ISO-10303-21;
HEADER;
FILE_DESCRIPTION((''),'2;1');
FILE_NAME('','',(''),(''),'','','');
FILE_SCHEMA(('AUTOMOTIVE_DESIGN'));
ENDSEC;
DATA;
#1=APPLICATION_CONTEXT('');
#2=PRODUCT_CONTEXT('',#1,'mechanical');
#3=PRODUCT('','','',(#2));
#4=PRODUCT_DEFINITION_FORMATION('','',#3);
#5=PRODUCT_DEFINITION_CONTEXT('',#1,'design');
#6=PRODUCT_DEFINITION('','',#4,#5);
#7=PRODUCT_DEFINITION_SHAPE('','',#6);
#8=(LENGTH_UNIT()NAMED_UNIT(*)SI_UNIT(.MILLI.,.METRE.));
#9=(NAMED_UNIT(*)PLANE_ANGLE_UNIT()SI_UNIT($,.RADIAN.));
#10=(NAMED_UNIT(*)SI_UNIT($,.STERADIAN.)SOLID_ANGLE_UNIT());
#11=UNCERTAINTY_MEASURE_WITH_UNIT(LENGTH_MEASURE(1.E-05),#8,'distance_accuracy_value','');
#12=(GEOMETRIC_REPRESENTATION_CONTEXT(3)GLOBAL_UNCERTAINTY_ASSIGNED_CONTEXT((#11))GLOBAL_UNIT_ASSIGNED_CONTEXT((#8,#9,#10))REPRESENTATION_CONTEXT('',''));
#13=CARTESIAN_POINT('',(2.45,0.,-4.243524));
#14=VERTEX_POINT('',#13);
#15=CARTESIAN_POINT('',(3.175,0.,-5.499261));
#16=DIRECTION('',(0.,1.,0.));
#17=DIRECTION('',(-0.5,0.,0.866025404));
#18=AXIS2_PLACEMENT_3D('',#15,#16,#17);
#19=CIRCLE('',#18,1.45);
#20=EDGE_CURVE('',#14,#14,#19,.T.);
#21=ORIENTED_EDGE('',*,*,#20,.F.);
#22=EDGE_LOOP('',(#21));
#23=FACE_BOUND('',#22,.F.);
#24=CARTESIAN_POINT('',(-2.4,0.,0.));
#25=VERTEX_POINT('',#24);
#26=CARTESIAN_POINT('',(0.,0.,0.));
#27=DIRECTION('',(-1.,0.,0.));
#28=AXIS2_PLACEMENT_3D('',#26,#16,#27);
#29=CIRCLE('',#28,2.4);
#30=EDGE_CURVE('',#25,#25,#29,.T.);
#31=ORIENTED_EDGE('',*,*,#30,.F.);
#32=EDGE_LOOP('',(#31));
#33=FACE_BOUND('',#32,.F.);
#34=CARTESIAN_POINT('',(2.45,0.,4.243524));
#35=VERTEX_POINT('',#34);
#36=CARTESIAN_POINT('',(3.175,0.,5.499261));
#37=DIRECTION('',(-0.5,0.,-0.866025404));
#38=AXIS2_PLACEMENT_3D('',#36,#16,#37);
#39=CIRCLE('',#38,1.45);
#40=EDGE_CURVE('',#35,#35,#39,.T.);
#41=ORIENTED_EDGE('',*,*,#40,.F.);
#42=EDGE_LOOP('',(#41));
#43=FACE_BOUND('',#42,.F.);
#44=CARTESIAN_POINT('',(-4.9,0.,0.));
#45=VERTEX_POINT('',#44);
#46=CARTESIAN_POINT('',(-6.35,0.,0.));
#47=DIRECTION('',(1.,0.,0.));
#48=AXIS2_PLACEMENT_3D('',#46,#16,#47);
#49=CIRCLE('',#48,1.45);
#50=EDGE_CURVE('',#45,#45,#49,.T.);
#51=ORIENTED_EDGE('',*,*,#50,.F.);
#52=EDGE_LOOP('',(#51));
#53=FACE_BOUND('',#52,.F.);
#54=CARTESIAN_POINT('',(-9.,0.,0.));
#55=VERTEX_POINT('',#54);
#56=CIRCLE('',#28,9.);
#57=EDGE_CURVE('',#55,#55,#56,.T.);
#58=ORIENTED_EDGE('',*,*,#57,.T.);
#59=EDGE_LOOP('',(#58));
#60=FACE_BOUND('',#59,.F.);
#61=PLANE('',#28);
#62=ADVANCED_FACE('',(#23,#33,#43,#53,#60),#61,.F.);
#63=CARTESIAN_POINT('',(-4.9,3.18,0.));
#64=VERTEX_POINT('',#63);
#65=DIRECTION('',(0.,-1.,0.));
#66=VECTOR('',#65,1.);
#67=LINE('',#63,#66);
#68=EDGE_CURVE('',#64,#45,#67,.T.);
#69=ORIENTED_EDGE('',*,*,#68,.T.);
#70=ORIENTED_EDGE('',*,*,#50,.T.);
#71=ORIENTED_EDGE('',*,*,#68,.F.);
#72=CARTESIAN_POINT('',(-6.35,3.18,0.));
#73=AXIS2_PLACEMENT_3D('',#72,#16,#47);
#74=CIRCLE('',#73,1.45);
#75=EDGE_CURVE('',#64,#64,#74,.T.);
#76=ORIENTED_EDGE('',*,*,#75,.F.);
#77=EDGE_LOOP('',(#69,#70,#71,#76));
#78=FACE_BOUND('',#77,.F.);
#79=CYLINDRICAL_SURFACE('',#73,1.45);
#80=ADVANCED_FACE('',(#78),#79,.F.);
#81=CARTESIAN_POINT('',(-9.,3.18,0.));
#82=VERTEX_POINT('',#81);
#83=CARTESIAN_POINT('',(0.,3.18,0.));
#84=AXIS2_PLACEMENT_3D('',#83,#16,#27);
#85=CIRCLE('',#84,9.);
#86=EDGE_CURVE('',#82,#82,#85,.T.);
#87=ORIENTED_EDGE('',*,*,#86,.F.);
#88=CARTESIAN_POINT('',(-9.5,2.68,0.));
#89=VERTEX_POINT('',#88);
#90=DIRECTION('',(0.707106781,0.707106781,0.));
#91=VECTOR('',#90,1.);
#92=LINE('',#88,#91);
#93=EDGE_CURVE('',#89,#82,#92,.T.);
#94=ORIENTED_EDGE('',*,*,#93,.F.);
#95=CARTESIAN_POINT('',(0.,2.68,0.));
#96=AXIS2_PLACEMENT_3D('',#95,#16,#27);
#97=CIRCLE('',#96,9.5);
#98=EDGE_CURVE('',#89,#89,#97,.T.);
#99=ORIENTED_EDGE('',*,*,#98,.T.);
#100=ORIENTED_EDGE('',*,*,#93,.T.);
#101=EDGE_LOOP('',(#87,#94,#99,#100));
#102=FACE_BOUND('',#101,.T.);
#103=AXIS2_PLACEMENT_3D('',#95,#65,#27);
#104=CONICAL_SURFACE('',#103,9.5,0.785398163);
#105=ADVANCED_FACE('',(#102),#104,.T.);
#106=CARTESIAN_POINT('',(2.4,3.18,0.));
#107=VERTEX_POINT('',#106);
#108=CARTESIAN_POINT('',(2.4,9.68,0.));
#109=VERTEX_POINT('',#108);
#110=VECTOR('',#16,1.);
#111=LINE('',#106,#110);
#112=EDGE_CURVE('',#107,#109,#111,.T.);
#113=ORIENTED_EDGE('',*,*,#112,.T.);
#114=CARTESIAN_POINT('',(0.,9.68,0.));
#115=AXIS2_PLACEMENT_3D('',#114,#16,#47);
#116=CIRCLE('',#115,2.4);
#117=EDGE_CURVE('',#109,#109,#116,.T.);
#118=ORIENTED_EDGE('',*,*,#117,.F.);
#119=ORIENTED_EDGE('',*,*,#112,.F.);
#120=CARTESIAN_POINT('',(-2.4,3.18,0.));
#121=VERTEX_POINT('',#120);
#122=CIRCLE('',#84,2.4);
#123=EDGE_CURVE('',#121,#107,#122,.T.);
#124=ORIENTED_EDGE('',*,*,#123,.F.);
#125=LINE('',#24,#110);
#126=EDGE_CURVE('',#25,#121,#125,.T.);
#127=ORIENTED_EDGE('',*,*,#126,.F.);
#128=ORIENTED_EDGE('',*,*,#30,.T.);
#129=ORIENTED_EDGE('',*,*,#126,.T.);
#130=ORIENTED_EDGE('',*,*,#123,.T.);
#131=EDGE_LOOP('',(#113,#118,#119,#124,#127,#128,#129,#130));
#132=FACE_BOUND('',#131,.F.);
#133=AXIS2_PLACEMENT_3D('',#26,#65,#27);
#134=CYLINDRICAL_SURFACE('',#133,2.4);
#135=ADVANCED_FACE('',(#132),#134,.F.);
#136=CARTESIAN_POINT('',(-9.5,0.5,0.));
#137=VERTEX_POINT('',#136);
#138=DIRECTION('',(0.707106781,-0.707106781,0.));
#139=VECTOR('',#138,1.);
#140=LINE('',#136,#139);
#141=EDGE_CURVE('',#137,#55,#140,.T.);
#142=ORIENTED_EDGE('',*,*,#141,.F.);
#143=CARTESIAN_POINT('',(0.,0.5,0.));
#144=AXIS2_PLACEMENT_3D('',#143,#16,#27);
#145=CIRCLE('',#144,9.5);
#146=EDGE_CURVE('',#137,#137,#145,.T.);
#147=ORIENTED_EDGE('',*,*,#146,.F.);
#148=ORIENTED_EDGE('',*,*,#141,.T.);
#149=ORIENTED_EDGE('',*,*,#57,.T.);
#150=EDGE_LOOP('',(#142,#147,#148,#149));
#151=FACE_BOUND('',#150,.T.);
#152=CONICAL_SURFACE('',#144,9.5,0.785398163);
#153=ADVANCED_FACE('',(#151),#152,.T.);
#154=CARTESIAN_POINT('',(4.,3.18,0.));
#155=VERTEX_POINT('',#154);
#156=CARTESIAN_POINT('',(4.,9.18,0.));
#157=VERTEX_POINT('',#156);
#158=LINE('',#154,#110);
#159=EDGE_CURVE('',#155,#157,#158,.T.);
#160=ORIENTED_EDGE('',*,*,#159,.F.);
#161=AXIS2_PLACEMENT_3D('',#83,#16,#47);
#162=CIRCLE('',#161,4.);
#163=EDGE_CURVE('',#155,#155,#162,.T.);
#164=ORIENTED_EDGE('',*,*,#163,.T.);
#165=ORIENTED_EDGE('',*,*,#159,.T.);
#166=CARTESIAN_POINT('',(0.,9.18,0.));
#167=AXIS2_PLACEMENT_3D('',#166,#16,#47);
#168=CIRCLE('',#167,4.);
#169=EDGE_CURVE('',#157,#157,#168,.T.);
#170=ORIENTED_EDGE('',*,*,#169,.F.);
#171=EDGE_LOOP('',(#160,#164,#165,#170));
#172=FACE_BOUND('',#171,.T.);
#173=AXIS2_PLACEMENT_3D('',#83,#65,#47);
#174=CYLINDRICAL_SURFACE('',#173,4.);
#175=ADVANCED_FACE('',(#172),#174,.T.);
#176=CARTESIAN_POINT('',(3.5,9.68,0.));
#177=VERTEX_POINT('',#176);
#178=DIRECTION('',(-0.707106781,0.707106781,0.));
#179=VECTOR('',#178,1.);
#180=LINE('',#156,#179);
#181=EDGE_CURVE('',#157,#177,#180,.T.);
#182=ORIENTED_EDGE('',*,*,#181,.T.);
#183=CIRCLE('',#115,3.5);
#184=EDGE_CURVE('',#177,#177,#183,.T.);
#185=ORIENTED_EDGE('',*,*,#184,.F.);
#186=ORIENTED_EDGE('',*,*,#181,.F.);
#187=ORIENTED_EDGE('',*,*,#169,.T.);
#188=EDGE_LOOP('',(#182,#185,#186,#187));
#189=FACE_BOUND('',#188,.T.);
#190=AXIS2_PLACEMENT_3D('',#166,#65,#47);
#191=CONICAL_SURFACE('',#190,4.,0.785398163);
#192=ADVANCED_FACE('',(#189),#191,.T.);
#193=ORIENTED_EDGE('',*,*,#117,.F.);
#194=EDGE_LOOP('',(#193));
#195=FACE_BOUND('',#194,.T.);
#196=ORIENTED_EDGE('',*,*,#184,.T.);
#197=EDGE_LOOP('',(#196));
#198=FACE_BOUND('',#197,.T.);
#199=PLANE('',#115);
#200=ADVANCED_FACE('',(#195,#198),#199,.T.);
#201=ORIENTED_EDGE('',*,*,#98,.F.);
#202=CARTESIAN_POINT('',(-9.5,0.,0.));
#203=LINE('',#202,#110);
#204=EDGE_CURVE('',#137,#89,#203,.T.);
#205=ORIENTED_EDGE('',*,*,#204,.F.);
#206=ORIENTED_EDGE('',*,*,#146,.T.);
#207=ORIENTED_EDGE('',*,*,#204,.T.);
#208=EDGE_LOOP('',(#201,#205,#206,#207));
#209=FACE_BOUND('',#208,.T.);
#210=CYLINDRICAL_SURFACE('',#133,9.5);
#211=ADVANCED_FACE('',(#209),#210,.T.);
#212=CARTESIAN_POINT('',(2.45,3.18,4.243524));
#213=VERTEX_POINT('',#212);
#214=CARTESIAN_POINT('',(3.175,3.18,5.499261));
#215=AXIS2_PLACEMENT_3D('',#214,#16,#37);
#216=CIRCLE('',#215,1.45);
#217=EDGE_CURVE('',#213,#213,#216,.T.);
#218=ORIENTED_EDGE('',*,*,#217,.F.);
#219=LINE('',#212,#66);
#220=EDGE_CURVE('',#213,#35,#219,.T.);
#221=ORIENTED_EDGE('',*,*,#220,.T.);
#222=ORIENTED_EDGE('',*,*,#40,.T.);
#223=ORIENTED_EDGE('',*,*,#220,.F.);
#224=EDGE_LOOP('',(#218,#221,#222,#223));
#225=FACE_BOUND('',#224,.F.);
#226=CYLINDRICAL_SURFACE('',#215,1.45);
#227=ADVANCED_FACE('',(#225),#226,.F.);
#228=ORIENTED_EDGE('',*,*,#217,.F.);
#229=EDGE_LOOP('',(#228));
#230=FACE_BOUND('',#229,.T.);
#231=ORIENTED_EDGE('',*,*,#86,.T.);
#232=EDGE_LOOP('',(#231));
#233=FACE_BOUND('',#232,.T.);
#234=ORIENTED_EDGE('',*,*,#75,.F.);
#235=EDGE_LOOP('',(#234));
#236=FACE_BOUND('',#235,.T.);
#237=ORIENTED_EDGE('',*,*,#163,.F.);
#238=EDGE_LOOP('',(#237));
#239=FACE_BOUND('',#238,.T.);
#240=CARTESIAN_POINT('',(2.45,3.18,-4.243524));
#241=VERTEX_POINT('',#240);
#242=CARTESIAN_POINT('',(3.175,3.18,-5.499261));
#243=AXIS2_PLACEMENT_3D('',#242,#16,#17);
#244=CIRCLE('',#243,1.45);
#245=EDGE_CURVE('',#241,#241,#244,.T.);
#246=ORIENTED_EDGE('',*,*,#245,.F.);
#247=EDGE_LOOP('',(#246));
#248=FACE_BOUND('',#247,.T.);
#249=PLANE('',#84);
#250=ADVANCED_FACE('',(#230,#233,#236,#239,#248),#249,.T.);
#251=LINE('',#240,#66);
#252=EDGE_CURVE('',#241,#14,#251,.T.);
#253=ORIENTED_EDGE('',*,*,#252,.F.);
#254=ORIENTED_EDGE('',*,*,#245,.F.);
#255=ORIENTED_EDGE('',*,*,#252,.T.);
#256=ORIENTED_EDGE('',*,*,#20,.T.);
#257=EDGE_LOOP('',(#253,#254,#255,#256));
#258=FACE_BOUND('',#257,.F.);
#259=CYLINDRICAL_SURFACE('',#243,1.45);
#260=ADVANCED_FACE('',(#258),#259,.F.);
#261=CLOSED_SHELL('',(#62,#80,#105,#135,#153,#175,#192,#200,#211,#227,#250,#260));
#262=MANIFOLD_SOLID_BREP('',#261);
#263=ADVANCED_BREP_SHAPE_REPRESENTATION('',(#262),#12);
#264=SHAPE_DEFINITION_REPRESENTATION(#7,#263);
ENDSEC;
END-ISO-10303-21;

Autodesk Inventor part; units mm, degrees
ref_plane "YZ Plane" through (0, 0, 0) normal (1, 0, 0) x (0, 1, 0)
ref_plane "XZ Plane" through (0, 0, 0) normal (0, 1, 0) x (-1, 0, 0)
ref_plane "XY Plane" through (0, 0, 0) normal (0, 0, 1) x (1, 0, 0)
sketch "Sketch1" plane through (0, 0, 0) normal (0, 1, 0) x (-1, 0, 0)
  circle A0 centre (0, 0) radius 9.5
  circle A1 centre (0, 0) radius 2.4
  dimension "d0" = 19
  dimension "d1" = 4.8
extrude "Extrusion1" add sketch "Sketch1" along normal blind 3.18
sketch "Sketch2" plane through (0, 3.18, 0) normal (0, 1, 0) x (1, 0, 0)
  circle A0 centre (0, 0) radius 2.4
  circle A1 centre (0, 0) radius 4
  circle A2 centre (0, 0) radius 2.4 projected
  dimension "d4" = 8
extrude "Extrusion2" add sketch "Sketch2" along normal blind 6.5
sketch "Sketch3" plane through (0, 3.18, 0) normal (0, 1, 0) x (1, 0, 0)
  circle A0 centre (-6.35, 0) radius 1.45
  circle A1 centre (0, 0) radius 6.35 construction
  dimension "d8" = 12.7
  dimension "d7" = 2.9
extrude "Extrusion3" cut sketch "Sketch3" against normal blind 6.5
pattern_circular "Circular Pattern1" count 3 over 360 about axis through (0, 3.18, 0) along (0, 1, 0) of "Extrusion3"
chamfer "Chamfer1" distance 0.5 angle 45 3 edges at (-4, 9.68, 0) (9.5, 3.18, 0) (9.5, 0, 0)
properties part number "Nut"
